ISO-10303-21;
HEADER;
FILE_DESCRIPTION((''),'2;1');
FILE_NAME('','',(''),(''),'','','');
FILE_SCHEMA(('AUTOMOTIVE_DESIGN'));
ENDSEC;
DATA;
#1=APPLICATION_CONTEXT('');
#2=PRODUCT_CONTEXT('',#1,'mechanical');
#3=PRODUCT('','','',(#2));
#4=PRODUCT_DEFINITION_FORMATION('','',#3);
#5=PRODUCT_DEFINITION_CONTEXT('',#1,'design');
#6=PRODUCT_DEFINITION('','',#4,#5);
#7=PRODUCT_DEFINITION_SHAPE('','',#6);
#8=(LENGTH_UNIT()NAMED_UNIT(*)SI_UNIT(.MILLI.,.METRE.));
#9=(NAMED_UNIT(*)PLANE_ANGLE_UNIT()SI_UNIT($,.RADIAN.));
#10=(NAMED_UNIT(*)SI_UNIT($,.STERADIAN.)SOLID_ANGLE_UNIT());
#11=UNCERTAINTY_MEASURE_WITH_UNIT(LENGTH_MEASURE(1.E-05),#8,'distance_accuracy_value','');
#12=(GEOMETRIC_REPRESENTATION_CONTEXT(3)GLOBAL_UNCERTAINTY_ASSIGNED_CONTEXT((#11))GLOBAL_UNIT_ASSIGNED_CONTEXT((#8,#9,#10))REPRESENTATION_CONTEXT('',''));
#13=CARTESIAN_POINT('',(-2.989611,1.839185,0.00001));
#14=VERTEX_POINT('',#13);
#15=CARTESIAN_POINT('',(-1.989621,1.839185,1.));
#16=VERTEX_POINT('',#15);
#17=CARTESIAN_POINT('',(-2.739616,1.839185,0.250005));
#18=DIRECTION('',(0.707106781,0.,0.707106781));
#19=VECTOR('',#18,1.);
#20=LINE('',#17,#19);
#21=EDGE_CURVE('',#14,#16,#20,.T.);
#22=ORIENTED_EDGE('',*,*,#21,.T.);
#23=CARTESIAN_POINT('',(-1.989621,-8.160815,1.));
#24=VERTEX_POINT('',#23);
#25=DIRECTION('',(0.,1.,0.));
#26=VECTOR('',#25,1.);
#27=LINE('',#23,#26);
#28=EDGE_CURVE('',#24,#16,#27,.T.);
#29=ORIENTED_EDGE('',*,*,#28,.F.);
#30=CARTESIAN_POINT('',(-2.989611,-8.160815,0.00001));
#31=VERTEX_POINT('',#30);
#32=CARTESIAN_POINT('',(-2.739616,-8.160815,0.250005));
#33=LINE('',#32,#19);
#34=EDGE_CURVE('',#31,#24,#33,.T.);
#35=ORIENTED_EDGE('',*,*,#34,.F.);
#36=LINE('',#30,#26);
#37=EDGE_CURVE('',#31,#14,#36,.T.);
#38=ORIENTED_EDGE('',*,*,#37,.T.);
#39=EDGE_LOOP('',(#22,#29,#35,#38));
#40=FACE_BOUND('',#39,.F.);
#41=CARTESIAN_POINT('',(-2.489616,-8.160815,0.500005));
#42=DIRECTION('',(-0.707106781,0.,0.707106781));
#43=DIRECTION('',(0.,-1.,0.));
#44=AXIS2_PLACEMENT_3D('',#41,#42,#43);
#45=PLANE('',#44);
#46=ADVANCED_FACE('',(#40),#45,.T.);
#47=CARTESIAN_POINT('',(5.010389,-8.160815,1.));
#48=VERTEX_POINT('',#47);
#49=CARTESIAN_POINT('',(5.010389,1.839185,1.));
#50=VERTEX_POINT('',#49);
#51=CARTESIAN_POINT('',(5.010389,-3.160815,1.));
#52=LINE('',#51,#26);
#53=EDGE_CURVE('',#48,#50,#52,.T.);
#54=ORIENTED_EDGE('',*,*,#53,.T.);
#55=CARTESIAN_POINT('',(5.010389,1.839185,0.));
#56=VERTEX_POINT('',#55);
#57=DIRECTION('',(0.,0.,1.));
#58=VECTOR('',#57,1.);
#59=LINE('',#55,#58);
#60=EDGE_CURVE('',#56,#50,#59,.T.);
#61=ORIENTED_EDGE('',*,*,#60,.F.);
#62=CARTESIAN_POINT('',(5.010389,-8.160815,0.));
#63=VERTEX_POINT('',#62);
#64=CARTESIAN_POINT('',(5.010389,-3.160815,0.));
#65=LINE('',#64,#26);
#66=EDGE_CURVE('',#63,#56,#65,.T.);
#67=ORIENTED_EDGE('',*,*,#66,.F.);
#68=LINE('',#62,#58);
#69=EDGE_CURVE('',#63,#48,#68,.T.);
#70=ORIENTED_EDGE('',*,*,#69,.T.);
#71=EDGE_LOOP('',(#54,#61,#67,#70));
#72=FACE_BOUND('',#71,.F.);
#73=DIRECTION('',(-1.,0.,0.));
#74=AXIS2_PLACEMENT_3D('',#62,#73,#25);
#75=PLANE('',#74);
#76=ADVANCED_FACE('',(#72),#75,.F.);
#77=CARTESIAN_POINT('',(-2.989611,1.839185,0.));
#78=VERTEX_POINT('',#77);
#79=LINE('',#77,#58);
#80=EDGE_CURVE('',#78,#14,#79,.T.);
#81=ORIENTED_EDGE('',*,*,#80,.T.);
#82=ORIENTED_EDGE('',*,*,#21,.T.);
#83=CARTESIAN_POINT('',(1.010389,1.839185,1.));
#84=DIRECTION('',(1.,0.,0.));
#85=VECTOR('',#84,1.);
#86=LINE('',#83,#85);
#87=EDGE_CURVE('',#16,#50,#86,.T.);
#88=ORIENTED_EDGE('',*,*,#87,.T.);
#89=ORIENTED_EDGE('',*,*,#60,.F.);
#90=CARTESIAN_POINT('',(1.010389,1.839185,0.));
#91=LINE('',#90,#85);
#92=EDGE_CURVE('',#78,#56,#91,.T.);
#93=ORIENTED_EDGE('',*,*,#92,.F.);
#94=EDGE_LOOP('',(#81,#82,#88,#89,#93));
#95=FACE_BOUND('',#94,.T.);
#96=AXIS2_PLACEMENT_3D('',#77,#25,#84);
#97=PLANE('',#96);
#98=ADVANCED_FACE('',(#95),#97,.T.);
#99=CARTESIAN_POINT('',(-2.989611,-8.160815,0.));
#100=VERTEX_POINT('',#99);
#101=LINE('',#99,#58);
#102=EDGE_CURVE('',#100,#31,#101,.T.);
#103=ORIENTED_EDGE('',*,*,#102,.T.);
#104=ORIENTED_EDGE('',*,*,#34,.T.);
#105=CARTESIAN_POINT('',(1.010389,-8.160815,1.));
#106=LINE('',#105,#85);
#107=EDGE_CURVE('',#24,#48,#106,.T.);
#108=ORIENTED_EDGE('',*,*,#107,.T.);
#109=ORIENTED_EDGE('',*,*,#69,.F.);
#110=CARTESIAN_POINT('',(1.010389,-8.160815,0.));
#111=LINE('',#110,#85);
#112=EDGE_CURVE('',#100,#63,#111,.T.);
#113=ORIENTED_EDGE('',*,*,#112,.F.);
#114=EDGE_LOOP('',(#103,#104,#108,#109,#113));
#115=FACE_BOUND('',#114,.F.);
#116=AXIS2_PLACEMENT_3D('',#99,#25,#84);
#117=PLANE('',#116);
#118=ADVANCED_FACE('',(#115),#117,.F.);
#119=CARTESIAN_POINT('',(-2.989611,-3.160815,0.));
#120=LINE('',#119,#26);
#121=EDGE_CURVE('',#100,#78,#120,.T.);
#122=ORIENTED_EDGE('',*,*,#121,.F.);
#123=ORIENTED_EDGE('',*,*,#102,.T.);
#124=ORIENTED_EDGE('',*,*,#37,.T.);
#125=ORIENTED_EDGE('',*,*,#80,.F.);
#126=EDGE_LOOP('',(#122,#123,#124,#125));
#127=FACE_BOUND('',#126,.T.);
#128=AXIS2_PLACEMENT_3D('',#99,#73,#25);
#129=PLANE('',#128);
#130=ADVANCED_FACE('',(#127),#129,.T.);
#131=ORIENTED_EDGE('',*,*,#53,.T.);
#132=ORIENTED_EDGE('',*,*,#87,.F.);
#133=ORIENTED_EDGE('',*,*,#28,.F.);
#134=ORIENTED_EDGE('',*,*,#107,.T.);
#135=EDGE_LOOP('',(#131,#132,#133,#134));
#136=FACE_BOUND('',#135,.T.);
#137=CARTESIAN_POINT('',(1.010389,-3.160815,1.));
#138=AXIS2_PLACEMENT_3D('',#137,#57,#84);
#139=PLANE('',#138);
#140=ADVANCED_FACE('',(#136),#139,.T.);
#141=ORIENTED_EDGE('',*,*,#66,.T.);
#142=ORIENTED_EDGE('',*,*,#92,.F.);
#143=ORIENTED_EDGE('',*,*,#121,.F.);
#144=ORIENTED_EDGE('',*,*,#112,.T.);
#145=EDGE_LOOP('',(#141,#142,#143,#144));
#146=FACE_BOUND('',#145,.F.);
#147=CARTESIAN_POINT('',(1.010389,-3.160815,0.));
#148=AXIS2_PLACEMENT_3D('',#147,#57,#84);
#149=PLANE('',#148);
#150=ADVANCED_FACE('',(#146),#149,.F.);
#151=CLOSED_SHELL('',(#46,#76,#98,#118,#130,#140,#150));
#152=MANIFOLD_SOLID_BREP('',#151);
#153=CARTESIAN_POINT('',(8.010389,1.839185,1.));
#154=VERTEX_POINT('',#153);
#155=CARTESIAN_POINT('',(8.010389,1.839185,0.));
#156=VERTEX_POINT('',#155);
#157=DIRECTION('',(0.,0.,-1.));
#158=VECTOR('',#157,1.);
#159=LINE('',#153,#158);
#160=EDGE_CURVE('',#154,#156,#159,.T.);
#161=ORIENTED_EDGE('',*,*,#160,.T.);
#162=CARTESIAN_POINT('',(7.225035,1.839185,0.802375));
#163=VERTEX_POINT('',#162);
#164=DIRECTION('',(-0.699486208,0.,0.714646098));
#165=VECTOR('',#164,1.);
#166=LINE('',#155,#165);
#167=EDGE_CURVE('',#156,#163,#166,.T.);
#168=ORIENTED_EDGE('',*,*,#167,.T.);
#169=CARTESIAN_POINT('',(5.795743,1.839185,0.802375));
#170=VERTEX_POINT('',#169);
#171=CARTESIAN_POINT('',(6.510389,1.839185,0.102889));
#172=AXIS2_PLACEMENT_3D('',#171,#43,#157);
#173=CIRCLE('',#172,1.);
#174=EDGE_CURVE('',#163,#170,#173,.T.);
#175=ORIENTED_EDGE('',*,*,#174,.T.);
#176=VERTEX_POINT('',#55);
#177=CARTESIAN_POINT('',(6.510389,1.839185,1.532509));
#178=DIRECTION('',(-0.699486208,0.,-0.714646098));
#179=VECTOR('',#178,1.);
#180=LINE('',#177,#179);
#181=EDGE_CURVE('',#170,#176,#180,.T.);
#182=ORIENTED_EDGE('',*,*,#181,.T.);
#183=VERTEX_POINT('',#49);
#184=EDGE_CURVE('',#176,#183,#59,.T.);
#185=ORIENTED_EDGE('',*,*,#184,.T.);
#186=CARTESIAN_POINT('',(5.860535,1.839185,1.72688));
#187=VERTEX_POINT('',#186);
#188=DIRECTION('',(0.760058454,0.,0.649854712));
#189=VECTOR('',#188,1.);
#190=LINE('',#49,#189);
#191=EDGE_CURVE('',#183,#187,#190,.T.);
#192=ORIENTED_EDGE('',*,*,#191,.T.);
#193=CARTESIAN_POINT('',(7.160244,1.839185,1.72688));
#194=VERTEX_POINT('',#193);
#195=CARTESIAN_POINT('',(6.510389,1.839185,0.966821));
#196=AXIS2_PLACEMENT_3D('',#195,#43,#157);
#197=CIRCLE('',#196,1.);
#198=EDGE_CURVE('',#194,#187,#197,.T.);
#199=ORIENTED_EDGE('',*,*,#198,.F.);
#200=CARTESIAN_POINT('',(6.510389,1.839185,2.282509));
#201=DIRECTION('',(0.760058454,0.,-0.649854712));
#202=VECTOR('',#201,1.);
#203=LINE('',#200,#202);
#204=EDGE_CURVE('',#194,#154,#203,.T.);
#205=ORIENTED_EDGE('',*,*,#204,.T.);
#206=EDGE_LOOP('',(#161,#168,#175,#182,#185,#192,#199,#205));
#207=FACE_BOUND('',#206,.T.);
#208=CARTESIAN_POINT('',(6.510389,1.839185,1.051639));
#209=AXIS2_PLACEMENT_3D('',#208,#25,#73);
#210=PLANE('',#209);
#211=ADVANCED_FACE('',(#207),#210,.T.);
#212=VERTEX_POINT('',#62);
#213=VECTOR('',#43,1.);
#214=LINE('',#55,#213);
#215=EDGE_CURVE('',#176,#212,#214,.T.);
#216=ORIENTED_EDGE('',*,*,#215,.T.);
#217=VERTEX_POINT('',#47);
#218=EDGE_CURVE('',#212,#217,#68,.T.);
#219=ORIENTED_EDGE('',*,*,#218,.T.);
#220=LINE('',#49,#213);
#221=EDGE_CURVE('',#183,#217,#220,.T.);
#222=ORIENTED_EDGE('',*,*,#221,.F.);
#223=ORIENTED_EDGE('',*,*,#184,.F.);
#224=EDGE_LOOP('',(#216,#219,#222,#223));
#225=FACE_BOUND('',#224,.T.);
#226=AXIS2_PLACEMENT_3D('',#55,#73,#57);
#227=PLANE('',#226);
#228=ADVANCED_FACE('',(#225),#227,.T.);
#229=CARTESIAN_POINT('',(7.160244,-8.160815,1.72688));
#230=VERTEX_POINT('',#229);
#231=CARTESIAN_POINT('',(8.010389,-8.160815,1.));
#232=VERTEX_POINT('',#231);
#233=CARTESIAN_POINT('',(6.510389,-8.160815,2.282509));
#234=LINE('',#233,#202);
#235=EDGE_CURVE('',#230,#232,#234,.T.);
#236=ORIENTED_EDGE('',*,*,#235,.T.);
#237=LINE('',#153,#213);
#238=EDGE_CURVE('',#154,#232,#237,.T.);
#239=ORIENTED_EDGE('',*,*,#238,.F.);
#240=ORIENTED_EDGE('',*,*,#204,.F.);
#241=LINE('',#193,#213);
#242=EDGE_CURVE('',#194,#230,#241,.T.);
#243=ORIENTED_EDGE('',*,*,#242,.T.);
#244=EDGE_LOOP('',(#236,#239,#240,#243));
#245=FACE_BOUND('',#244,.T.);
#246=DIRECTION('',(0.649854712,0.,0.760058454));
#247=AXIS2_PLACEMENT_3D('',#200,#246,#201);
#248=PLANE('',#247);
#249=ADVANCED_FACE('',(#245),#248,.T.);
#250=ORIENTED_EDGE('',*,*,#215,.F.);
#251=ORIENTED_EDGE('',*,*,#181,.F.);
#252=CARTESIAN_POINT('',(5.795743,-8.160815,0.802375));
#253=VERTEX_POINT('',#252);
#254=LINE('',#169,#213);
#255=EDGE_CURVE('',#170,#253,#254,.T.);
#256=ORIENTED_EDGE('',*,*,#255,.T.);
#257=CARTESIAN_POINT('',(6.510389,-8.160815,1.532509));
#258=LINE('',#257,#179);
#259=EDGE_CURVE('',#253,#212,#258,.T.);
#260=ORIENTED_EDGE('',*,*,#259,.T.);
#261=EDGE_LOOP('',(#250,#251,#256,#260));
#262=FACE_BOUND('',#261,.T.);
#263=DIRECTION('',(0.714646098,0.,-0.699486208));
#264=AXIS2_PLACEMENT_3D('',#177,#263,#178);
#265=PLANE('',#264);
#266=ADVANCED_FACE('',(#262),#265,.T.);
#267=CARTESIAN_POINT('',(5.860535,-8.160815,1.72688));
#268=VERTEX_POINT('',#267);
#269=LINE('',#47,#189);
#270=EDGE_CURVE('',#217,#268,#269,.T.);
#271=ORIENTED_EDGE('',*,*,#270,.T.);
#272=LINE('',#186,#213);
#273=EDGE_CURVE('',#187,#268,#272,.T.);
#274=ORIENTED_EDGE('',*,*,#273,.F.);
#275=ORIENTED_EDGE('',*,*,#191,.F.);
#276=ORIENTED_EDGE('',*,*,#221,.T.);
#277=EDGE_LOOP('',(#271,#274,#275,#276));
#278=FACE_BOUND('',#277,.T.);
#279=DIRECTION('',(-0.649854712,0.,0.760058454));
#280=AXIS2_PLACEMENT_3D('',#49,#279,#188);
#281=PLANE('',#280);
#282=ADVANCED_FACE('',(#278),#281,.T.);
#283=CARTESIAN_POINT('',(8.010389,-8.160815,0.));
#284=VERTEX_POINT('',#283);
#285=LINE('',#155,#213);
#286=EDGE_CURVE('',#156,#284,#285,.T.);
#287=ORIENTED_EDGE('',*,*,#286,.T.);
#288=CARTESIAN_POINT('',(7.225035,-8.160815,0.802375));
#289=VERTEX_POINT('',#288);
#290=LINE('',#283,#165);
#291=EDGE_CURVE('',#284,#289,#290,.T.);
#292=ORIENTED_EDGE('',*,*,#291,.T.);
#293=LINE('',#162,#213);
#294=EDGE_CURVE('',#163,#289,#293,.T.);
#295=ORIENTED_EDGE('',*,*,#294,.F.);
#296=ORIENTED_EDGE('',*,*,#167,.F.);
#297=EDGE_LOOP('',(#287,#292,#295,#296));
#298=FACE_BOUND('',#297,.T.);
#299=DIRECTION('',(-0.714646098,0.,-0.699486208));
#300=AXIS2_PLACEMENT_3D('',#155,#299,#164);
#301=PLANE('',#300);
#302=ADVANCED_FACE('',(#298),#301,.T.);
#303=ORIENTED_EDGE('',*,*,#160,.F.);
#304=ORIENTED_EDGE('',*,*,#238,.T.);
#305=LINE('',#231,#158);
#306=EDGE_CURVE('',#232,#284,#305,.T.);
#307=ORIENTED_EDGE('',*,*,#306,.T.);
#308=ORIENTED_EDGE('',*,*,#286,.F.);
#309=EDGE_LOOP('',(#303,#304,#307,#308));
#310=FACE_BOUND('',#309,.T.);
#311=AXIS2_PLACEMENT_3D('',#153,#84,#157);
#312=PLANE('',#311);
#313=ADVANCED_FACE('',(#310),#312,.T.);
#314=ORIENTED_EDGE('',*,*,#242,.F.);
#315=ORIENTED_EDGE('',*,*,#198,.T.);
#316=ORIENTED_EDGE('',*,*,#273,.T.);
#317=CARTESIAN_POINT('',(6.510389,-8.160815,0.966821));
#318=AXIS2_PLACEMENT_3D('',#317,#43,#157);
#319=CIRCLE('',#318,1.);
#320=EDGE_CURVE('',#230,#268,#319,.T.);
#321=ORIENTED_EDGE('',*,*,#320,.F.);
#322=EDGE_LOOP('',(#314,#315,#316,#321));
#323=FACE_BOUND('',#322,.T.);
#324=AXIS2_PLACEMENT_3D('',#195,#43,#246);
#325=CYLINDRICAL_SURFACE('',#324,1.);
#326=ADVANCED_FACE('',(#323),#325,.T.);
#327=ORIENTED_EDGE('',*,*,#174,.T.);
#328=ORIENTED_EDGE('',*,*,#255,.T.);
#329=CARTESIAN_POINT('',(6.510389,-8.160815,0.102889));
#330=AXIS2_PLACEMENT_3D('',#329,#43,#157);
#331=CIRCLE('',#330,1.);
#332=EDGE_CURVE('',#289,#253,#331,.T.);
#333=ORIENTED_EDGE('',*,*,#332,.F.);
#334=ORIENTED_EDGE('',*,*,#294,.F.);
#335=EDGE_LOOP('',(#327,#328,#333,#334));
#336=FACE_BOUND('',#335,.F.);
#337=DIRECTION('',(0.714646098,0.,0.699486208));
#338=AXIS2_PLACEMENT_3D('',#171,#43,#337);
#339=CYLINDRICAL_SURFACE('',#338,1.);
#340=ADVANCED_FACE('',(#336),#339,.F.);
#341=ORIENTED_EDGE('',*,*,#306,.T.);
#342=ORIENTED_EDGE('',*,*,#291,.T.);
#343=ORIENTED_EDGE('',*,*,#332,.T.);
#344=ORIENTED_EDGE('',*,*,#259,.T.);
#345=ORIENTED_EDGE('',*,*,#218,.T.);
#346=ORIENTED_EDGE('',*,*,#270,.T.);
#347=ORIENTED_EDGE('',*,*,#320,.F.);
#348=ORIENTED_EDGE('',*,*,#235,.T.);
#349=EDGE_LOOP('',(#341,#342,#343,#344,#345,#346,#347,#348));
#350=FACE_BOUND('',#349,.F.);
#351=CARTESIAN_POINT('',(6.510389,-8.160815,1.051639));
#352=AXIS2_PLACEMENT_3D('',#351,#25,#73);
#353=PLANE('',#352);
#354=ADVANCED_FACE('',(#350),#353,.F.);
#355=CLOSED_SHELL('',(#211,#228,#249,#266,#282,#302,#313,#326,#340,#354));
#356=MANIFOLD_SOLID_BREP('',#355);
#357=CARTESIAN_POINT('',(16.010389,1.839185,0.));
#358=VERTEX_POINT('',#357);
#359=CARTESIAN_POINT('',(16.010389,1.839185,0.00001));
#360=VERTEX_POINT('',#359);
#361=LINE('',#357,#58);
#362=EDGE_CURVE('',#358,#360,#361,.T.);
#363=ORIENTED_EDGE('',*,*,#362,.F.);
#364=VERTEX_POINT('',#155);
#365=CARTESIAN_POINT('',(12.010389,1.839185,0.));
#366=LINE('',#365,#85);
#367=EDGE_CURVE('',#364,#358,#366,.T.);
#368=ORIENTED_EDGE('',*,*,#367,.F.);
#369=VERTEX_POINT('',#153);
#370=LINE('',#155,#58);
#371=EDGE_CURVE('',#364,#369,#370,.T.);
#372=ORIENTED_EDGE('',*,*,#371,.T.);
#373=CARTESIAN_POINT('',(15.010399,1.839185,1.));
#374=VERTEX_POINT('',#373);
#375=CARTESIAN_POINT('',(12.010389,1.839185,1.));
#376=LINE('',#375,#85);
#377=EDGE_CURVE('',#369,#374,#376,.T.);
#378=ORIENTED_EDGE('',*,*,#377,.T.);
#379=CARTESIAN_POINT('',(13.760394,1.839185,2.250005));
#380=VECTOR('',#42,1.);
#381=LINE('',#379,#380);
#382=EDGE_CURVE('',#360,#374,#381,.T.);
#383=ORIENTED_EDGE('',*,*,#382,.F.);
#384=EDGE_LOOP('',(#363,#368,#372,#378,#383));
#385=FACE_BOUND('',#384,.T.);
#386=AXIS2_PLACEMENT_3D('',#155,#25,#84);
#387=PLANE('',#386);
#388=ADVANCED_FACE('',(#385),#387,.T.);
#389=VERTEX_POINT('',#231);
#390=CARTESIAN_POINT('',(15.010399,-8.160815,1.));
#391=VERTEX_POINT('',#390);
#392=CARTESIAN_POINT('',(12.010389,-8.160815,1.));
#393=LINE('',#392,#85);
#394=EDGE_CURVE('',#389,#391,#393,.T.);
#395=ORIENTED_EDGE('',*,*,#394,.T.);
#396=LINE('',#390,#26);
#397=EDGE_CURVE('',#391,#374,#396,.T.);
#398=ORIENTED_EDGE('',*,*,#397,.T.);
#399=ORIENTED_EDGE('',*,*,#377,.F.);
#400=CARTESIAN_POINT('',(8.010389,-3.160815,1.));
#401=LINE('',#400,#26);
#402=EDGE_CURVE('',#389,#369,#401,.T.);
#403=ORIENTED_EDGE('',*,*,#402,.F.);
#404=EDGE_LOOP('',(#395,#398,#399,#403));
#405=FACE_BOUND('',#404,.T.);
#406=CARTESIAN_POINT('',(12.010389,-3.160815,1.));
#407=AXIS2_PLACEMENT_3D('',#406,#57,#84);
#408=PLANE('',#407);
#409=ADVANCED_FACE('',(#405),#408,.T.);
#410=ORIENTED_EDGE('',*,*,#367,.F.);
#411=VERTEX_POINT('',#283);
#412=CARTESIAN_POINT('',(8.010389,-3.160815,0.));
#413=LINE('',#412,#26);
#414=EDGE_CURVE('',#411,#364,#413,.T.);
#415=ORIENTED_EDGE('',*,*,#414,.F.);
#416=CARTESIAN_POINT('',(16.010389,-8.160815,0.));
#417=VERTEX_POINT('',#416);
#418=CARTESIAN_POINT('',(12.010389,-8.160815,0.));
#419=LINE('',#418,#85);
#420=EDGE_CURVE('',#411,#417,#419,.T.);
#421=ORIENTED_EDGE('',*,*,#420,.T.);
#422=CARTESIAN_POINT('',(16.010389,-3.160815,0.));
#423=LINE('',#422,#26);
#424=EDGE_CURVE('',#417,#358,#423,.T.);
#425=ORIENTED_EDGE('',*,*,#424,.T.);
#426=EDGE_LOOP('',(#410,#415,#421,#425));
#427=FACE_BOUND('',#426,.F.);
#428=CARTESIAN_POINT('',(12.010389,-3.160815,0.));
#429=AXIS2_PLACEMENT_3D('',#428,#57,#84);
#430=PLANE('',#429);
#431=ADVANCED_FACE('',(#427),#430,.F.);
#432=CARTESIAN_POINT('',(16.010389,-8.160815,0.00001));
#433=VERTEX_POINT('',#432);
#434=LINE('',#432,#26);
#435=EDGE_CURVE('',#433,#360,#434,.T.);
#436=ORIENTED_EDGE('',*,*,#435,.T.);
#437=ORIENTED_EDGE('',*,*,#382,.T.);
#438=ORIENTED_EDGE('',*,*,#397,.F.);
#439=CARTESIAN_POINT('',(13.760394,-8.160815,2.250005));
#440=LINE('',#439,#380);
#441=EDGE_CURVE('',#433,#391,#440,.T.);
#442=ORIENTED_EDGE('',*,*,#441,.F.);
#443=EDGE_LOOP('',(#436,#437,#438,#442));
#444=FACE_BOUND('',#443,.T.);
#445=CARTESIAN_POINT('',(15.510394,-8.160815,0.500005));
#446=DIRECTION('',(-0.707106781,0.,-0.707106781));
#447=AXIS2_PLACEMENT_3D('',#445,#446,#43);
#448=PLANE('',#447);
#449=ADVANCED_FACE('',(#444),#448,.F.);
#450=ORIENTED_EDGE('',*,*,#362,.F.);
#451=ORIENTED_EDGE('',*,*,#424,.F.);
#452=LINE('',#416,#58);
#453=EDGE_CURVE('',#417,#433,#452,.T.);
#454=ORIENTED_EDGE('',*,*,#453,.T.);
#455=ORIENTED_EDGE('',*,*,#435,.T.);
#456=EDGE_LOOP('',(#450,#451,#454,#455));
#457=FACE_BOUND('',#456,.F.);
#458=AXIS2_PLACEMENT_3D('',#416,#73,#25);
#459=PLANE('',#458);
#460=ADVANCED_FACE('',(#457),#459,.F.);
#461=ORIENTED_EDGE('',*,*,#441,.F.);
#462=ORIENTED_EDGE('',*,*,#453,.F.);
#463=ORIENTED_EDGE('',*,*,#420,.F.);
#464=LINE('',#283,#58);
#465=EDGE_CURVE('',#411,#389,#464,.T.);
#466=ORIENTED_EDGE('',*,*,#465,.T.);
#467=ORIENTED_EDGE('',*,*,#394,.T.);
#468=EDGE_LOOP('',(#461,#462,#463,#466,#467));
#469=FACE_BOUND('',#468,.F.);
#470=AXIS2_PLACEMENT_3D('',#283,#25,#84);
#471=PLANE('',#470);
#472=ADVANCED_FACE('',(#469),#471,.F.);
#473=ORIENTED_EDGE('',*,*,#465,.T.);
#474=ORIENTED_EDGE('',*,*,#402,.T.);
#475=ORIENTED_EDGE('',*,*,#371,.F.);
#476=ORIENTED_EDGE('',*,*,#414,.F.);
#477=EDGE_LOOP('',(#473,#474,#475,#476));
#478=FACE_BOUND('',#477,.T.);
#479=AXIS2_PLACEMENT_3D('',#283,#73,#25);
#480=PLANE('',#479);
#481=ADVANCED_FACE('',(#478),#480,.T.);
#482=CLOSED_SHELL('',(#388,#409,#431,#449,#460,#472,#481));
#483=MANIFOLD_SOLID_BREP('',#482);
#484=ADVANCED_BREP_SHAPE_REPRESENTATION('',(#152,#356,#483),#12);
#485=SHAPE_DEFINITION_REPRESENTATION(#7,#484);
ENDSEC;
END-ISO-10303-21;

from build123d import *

# Parameters (mm, degrees)
F0_W      = 8
F0_H      = 10
F1_DEPTH  = 1
F3_DEPTH  = 10
F4_R      = 1
F5_SIZE   = 0.99999
F5_2_SIZE = 0.99999


# Not quite as in the source:
# - a fillet or chamfer is up to 0.001 mm smaller than in the source, because OpenCascade refuses the exact size


with BuildPart() as f1:
    # F0 (on Top) → F1 (new body)
    with BuildSketch(Plane.XY):
        with Locations((12.0103892572, -3.1608146429)):
            Rectangle(F0_W, F0_H)
    extrude(amount=F1_DEPTH)

    # F5#2 (size 1 in the source; OpenCascade refuses exactly that, so slightly less here)
    f5_2_edges = [f1.edges().sort_by_distance(p)[0] for p in [
        (16.010389, -3.160815, 1),
    ]]
    chamfer(f5_2_edges, length=F5_2_SIZE)


with BuildPart() as f1b:
    # F0 (on Top) → F1, piece 2 (new body)
    with BuildSketch(Plane.XY):
        with Locations((1.0103892572, -3.1608146429)):
            Rectangle(F0_W, F0_H)
    extrude(amount=F1_DEPTH)

    # F5 (size 1 in the source; OpenCascade refuses exactly that, so slightly less here)
    f5_edges = [f1b.edges().sort_by_distance(p)[0] for p in [
        (-2.989611, -3.160815, 1),
    ]]
    chamfer(f5_edges, length=F5_SIZE)


with BuildPart() as f3:
    # F2 (on face) → F3 (new body, through all)
    with BuildSketch(Plane(origin=(0, 1.8391853571, 0), x_dir=(-1, 0, 0), z_dir=(0, 1, 0))):
        Polygon((-6.5103892572, 2.2825093409), (-8.0103892572, 1), (-8.0103892572, 0), (-6.5103892572, 1.5325093409), (-5.0103892572, 0), (-5.0103892572, 1), align=None)
    extrude(amount=-F3_DEPTH)

    # F4
    f4_edges = [f3.edges().sort_by_distance(p)[0] for p in [
        (6.510389, -3.160815, 1.532509),
        (6.510389, -3.160815, 2.282509),
    ]]
    fillet(f4_edges, radius=F4_R)


solid = Compound([f1.part, f1b.part, f3.part])
